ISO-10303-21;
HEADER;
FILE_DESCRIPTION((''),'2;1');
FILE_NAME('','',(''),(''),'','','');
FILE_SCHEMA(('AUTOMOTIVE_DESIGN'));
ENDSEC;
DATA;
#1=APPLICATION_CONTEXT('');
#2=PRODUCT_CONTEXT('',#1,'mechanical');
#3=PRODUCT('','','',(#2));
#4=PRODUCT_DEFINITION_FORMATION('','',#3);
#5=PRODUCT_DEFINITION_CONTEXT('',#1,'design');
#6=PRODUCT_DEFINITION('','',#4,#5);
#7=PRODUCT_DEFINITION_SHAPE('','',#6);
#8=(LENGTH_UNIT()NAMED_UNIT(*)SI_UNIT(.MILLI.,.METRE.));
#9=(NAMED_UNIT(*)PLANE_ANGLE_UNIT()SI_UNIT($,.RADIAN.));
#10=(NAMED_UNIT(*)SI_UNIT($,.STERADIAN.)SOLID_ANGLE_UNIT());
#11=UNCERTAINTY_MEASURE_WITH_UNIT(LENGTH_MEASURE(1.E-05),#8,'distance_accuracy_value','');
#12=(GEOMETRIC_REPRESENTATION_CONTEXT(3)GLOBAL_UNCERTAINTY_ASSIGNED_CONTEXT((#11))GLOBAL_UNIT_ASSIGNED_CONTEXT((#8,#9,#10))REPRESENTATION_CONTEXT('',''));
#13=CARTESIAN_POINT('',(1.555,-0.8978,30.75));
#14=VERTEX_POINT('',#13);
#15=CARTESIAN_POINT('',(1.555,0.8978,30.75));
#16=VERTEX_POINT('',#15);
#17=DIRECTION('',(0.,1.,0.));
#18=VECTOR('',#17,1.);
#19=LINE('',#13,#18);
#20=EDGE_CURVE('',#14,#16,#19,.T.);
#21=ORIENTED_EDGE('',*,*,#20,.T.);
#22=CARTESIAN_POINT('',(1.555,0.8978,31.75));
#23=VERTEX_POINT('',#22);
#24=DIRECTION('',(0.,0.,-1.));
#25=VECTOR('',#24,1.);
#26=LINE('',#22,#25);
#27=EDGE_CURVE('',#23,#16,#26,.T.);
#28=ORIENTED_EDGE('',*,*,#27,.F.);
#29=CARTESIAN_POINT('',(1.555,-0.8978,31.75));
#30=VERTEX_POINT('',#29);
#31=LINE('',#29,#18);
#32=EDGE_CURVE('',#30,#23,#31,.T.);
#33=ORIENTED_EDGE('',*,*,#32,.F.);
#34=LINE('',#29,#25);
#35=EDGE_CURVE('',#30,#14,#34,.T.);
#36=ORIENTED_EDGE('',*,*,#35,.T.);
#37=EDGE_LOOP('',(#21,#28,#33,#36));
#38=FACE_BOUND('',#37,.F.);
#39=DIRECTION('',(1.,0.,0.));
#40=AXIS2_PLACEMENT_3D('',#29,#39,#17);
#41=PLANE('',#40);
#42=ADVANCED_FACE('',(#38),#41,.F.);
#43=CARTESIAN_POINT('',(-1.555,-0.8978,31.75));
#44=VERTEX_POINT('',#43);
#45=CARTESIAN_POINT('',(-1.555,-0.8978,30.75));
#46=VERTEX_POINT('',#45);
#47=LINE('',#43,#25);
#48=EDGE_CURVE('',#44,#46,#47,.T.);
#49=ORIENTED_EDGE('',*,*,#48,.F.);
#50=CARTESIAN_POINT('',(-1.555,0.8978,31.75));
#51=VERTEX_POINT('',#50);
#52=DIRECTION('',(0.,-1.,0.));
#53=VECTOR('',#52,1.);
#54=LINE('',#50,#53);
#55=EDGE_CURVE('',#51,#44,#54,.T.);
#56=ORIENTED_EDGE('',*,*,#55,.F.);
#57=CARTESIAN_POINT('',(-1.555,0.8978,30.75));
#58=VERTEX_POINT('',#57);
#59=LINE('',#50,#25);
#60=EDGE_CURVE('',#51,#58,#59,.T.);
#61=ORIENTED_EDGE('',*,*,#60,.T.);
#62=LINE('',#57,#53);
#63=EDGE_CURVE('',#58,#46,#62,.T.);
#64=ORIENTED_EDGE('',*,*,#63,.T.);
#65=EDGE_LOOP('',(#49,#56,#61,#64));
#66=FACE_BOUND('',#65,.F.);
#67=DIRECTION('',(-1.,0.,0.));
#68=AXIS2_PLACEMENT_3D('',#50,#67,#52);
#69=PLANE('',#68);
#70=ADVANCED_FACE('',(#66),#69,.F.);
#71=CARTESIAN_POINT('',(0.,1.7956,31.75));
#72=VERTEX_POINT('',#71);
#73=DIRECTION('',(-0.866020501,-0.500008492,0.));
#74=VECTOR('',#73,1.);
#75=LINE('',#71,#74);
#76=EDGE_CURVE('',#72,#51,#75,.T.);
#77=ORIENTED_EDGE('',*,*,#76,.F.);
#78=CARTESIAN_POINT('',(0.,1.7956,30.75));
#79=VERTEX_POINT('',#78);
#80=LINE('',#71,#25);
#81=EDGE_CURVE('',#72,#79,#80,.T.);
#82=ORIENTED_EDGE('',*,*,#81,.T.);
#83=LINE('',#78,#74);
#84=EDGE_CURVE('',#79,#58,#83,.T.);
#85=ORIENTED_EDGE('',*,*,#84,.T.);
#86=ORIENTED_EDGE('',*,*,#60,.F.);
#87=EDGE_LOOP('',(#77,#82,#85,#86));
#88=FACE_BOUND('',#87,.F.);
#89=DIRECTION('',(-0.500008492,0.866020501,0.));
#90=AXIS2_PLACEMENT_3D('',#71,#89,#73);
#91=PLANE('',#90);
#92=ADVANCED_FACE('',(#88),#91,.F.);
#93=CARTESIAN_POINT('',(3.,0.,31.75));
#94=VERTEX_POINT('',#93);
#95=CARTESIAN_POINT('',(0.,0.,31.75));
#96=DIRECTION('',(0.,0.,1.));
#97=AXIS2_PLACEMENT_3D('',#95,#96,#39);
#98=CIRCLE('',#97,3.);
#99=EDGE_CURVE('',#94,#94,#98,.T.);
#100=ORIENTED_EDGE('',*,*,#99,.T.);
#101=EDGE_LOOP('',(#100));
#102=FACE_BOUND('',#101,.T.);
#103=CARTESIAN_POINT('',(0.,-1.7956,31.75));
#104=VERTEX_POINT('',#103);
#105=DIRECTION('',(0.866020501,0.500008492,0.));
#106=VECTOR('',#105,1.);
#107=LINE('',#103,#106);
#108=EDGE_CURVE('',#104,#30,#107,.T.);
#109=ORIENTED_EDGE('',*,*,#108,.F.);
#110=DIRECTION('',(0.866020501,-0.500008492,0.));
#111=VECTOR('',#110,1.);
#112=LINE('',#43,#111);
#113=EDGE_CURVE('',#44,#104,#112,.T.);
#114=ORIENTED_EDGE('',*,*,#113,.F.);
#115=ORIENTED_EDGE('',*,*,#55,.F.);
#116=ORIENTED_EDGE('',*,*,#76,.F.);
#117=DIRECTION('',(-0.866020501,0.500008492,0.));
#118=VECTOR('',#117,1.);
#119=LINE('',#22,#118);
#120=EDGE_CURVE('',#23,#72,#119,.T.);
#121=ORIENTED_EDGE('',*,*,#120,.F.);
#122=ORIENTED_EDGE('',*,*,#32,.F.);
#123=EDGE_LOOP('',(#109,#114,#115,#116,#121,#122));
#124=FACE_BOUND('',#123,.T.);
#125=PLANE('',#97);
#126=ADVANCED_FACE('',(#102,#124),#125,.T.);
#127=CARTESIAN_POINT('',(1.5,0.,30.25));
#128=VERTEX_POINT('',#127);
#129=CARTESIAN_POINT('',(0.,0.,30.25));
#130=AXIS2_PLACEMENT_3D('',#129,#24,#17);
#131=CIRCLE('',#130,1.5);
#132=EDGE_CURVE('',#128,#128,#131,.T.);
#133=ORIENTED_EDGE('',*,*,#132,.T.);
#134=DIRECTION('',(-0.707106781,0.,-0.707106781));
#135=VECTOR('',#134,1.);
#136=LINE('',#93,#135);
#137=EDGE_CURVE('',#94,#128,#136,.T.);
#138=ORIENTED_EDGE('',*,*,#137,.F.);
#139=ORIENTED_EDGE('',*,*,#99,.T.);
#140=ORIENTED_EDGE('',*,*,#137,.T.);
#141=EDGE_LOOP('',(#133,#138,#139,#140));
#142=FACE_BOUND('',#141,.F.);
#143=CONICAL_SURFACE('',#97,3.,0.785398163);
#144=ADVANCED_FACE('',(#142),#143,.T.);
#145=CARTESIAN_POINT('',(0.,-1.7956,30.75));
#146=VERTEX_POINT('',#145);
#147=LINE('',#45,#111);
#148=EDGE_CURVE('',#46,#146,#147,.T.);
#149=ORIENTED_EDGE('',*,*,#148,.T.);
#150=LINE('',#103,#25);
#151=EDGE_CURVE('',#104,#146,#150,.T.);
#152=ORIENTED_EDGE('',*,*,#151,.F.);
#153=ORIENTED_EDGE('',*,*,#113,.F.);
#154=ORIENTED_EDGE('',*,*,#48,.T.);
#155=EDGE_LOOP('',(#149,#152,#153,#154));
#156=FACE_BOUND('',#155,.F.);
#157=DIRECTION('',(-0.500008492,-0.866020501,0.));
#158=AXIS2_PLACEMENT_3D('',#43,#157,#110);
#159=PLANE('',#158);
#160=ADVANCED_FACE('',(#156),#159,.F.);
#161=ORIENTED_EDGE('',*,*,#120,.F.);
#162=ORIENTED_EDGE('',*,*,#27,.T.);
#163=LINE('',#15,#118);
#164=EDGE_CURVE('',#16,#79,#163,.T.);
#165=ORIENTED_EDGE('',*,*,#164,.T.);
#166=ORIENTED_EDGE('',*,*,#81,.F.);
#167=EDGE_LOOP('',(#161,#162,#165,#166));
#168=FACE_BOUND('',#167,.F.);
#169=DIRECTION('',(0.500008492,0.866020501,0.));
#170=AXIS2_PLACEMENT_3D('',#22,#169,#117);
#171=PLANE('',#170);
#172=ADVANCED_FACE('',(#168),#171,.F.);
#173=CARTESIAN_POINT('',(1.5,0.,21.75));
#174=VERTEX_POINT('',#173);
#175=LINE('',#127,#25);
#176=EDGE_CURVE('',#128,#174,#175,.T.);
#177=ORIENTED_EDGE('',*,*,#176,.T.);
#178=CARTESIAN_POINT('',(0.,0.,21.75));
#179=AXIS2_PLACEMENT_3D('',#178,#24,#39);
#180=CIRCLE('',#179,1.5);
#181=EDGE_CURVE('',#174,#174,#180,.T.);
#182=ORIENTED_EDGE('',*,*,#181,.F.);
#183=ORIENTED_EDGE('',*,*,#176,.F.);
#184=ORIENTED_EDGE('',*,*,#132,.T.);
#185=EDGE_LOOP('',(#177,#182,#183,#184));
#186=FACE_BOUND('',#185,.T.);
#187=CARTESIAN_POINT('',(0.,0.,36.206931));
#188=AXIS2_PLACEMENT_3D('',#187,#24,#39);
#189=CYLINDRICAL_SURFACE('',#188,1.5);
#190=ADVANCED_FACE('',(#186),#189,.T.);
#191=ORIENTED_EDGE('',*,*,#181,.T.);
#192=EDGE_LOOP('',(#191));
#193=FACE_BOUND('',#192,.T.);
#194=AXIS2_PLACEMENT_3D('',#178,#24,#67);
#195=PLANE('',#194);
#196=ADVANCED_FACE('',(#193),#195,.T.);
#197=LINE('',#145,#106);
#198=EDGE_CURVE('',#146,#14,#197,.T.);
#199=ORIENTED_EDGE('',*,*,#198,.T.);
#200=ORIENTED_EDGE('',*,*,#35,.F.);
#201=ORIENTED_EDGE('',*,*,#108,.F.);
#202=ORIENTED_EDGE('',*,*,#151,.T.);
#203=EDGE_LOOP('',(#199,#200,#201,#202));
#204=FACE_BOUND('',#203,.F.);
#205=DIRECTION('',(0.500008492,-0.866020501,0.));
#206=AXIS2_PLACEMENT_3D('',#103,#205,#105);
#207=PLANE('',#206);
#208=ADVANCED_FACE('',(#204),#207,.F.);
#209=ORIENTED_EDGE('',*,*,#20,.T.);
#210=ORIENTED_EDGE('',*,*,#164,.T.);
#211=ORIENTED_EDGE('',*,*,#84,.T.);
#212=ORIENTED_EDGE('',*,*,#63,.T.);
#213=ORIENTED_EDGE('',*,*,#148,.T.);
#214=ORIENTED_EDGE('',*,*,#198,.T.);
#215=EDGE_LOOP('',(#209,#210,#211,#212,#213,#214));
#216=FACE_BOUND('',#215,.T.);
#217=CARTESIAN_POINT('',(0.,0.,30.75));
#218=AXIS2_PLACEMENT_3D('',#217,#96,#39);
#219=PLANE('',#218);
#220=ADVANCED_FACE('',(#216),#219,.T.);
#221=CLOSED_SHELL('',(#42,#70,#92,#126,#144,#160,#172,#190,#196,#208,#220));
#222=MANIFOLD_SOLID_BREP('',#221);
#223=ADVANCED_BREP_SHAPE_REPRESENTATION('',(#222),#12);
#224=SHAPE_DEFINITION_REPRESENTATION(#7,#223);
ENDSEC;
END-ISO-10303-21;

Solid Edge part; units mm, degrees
sketch "Sketch1" plane through (0, 0, 0) normal (0, 0, 1) x (1, 0, 0)
  circle A0 centre (0, 0) radius 1.5
extrude "Protrusion1" add sketch "Sketch1" along normal blind 30
sketch "Sketch2" plane through (0, 0, 30) normal (0, 0, 1) x (1, 0, 0)
  circle A0 centre (0, 0) radius 3
extrude "ExtrudedProtrusion_2" add sketch "Sketch2" along normal blind 1.75
chamfer "Chamfer_1" distance 1.75 angle 45 1 edges at (-3, 0, 30)
sketch "Sketch3" plane through (0, 0, 31.75) normal (0, 0, 1) x (0, 1, 0)
  line L0 (0.8978, -1.555) -> (1.7956, 0)
  line L1 (1.7956, 0) -> (0.8978, 1.555)
  line L2 (0.8978, 1.555) -> (-0.8978, 1.555)
  line L3 (-0.8978, 1.555) -> (-1.7956, 0)
  line L4 (-1.7956, 0) -> (-0.8978, -1.555)
  line L5 (-0.8978, -1.555) -> (0.8978, -1.555)
extrude "ExtrudedCutout_1" cut sketch "Sketch3" against normal blind 1
sketch "Sketch4" plane through (0, 0, 0) normal (0, 0, -1) x (0, 1, 0)
  circle A0 centre (0, 0) radius 1.9215
extrude "ExtrudedCutout_2" cut sketch "Sketch4" against normal blind 21.75
revolve "RevolvedCutout1" [suppressed]
fillet "Round_1" [suppressed]
properties material "Iron, grey cast type 20"
